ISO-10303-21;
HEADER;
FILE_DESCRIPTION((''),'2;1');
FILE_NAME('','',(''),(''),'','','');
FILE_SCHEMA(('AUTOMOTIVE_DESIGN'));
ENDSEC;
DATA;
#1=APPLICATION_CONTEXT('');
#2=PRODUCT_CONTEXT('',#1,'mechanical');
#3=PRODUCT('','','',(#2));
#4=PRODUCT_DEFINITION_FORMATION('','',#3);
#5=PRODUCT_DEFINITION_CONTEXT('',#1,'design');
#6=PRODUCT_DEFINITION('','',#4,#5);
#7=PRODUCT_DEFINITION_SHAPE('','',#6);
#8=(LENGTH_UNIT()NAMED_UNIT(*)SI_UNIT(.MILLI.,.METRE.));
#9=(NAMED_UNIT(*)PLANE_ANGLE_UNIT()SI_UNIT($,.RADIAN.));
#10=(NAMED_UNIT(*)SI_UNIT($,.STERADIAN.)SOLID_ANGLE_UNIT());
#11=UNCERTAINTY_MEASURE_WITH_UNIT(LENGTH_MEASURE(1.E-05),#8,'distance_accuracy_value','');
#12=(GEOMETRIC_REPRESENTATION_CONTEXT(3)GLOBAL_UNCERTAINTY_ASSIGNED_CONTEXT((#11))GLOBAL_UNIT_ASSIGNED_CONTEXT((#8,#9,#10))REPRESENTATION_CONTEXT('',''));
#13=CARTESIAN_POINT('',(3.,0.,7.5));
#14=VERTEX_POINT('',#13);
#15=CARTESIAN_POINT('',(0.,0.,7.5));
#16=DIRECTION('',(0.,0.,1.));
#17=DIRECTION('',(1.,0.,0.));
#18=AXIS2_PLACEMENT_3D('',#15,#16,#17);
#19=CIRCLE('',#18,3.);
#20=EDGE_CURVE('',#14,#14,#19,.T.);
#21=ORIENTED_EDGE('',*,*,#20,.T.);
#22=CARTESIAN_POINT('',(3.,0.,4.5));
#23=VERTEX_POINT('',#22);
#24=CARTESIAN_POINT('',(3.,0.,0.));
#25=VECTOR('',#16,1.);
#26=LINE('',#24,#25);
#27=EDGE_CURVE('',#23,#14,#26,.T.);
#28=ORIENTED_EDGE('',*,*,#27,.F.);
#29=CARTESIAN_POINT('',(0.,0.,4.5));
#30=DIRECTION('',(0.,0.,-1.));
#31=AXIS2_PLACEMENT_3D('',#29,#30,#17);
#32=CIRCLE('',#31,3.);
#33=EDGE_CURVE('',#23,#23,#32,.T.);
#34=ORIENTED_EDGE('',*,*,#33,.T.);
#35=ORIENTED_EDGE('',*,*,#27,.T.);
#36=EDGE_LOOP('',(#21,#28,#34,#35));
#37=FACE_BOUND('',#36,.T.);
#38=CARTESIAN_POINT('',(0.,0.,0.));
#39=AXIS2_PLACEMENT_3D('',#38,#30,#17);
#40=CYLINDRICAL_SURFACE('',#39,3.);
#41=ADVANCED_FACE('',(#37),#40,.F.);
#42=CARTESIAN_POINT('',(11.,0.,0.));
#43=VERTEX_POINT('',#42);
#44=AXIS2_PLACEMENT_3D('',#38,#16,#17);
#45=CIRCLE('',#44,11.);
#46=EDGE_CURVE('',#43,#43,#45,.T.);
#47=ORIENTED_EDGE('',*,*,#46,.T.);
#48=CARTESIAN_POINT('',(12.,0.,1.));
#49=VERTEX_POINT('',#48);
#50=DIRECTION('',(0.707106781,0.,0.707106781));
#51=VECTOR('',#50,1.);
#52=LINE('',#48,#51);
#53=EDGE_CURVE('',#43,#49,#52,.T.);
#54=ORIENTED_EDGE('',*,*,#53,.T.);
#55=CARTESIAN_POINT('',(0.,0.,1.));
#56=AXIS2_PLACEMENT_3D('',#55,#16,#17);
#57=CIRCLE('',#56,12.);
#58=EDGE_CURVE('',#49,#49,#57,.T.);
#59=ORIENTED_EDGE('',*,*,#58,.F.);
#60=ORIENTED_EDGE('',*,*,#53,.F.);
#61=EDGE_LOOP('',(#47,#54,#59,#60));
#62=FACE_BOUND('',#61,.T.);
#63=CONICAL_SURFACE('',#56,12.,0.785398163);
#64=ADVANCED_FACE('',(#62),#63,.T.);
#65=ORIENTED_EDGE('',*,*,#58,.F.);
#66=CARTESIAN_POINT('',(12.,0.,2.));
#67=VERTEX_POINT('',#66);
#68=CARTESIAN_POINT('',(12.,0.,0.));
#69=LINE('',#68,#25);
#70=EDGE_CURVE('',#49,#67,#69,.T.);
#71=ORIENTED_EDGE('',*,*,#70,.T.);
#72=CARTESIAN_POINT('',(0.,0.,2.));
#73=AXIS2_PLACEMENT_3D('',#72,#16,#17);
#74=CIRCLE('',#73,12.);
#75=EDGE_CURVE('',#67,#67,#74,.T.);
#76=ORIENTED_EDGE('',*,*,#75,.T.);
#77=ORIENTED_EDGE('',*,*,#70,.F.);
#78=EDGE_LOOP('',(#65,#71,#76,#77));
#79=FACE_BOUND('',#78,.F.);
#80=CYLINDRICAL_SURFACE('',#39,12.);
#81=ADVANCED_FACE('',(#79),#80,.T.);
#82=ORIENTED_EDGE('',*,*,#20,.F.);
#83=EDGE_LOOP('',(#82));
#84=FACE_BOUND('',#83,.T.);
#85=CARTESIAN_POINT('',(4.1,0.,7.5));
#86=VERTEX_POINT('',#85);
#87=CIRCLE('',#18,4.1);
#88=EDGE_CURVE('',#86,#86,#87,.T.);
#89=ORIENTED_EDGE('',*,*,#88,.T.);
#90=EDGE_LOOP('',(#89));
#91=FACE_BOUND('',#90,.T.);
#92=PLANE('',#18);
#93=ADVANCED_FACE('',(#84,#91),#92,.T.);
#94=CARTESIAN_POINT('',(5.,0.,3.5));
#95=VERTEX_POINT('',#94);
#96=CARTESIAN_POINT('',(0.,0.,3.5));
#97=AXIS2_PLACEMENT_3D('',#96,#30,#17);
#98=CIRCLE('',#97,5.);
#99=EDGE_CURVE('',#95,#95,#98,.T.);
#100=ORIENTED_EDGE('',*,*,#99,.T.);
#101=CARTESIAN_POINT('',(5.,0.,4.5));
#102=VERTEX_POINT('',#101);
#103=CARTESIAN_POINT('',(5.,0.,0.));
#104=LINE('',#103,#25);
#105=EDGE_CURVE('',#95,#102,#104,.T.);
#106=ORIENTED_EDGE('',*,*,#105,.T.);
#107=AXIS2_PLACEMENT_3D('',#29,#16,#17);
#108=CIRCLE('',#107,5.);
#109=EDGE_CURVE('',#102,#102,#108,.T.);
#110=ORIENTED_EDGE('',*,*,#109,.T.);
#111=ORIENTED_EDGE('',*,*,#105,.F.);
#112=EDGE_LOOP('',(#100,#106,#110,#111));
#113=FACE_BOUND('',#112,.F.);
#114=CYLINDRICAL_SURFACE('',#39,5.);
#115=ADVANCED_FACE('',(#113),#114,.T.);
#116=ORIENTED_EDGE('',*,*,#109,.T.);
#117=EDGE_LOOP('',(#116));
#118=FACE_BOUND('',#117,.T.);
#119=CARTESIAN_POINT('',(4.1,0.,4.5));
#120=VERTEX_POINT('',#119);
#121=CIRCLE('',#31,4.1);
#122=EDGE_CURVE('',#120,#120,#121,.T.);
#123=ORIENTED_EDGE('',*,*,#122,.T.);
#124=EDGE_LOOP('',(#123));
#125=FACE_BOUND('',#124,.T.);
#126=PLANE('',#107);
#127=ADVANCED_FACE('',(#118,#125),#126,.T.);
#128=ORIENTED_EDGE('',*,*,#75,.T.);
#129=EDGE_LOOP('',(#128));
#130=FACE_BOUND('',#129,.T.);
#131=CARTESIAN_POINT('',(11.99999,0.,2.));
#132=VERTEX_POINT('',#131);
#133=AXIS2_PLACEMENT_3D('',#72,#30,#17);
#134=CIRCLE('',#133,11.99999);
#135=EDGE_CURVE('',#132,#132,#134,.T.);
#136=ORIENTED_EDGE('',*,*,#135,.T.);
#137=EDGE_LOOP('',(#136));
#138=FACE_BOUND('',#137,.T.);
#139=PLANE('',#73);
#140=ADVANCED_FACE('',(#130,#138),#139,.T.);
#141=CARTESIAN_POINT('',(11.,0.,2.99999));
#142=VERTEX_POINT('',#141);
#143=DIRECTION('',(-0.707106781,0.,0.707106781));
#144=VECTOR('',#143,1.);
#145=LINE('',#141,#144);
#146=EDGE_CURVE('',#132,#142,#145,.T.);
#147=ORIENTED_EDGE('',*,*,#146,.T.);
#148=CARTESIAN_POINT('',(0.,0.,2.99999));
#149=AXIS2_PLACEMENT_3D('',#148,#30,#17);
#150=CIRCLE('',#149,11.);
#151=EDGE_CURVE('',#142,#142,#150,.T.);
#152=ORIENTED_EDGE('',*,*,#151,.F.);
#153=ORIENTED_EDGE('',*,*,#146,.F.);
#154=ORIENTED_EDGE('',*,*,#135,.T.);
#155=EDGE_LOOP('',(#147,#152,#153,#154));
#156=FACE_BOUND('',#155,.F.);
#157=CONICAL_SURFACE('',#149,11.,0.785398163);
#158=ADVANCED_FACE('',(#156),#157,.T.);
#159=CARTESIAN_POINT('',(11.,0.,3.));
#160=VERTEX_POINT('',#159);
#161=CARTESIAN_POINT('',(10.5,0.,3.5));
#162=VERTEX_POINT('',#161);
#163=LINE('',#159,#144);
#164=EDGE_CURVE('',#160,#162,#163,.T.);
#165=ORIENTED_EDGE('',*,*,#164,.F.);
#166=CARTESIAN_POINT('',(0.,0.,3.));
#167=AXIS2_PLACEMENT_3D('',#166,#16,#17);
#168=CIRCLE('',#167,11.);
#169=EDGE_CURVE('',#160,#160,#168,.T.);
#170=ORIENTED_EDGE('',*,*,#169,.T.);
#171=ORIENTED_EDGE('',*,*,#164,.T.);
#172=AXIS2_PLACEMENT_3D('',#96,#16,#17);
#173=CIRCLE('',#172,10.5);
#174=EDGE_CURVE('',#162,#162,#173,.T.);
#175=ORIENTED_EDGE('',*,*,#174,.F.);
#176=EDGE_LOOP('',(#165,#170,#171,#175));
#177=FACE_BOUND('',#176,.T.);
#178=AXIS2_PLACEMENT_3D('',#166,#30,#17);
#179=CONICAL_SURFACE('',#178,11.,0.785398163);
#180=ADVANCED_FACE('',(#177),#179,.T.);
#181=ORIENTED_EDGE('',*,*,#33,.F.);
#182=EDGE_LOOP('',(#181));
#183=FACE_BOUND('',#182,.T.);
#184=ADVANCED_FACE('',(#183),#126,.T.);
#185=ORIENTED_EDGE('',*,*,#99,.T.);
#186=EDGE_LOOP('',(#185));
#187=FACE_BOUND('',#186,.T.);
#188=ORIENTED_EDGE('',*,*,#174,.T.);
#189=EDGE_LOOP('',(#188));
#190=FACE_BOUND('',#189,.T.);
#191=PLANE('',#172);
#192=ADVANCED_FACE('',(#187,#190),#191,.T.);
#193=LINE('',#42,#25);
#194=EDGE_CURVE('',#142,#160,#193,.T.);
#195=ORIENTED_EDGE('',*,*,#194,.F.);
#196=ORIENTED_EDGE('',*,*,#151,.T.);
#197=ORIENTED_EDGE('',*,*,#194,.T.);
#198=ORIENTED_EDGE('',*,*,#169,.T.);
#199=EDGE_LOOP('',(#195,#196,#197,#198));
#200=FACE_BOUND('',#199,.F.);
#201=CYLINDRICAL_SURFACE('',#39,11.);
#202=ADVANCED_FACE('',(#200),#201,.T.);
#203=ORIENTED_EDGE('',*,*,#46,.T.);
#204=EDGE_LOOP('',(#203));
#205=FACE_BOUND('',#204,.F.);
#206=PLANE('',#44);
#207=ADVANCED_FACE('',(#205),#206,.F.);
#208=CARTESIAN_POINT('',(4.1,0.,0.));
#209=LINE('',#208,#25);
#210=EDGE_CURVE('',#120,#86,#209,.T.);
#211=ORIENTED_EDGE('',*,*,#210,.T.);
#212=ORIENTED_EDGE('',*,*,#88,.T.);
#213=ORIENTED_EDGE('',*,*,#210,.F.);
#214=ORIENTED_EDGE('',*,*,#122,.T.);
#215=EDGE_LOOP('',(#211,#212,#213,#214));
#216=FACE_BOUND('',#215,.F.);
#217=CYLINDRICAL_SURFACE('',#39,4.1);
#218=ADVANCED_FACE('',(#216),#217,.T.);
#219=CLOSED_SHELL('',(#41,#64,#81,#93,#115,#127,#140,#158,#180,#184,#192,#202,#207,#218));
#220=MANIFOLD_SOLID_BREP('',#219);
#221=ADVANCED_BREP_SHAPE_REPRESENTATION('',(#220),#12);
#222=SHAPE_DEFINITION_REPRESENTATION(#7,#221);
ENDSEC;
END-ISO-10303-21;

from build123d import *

# Parameters (mm, degrees)
F0_R     = 12
F0_R_2   = 11
F0_R_3   = 5
F0_R_4   = 4.1
F0_R_5   = 3
F1_DEPTH = 2
F2_DEPTH = 3.5
F3_SIZE  = 0.99999
F4_DEPTH = 4.5
F5_DEPTH = 7.5
F6_SIZE  = 1
F7_SIZE  = 0.5


# Not quite as in the source:
# - a fillet or chamfer is up to 0.001 mm smaller than in the source, because OpenCascade refuses the exact size


with BuildPart() as f1:
    # F0 (on Top) → F1 (new body)
    with BuildSketch(Plane.XY):
        Circle(F0_R)
        Circle(F0_R_2, mode=Mode.SUBTRACT)
        Circle(F0_R_2)
        Circle(F0_R_3, mode=Mode.SUBTRACT)
        Circle(F0_R_3)
        Circle(F0_R_4, mode=Mode.SUBTRACT)
        Circle(F0_R_4)
        Circle(F0_R_5, mode=Mode.SUBTRACT)
        Circle(F0_R_5)
    extrude(amount=F1_DEPTH)

    # F0 (on Top) → F2 (join)
    with BuildSketch(Plane.XY):
        Circle(F0_R_2)
        Circle(F0_R_3, mode=Mode.SUBTRACT)
        Circle(F0_R_3)
        Circle(F0_R_4, mode=Mode.SUBTRACT)
        Circle(F0_R_4)
        Circle(F0_R_5, mode=Mode.SUBTRACT)
        Circle(F0_R_5)
    extrude(amount=F2_DEPTH)

    # F3 (size 1 in the source; OpenCascade refuses exactly that, so slightly less here)
    f3_edges = [f1.edges().sort_by_distance(p)[0] for p in [
        (-11, 0, 2),
    ]]
    chamfer(f3_edges, length=F3_SIZE)

    # F0 (on Top) → F4 (join)
    with BuildSketch(Plane.XY):
        Circle(F0_R_3)
        Circle(F0_R_4, mode=Mode.SUBTRACT)
        Circle(F0_R_4)
        Circle(F0_R_5, mode=Mode.SUBTRACT)
        Circle(F0_R_5)
    extrude(amount=F4_DEPTH)

    # F0 (on Top) → F5 (join)
    with BuildSketch(Plane.XY):
        Circle(F0_R_4)
        Circle(F0_R_5, mode=Mode.SUBTRACT)
    extrude(amount=F5_DEPTH)

    # F6
    f6_edges = [f1.edges().sort_by_distance(p)[0] for p in [
        (-12, 0, 0),
    ]]
    chamfer(f6_edges, length=F6_SIZE)

    # F7
    f7_edges = [f1.edges().sort_by_distance(p)[0] for p in [
        (-11, 0, 3.5),
    ]]
    chamfer(f7_edges, length=F7_SIZE)


solid = f1.part
